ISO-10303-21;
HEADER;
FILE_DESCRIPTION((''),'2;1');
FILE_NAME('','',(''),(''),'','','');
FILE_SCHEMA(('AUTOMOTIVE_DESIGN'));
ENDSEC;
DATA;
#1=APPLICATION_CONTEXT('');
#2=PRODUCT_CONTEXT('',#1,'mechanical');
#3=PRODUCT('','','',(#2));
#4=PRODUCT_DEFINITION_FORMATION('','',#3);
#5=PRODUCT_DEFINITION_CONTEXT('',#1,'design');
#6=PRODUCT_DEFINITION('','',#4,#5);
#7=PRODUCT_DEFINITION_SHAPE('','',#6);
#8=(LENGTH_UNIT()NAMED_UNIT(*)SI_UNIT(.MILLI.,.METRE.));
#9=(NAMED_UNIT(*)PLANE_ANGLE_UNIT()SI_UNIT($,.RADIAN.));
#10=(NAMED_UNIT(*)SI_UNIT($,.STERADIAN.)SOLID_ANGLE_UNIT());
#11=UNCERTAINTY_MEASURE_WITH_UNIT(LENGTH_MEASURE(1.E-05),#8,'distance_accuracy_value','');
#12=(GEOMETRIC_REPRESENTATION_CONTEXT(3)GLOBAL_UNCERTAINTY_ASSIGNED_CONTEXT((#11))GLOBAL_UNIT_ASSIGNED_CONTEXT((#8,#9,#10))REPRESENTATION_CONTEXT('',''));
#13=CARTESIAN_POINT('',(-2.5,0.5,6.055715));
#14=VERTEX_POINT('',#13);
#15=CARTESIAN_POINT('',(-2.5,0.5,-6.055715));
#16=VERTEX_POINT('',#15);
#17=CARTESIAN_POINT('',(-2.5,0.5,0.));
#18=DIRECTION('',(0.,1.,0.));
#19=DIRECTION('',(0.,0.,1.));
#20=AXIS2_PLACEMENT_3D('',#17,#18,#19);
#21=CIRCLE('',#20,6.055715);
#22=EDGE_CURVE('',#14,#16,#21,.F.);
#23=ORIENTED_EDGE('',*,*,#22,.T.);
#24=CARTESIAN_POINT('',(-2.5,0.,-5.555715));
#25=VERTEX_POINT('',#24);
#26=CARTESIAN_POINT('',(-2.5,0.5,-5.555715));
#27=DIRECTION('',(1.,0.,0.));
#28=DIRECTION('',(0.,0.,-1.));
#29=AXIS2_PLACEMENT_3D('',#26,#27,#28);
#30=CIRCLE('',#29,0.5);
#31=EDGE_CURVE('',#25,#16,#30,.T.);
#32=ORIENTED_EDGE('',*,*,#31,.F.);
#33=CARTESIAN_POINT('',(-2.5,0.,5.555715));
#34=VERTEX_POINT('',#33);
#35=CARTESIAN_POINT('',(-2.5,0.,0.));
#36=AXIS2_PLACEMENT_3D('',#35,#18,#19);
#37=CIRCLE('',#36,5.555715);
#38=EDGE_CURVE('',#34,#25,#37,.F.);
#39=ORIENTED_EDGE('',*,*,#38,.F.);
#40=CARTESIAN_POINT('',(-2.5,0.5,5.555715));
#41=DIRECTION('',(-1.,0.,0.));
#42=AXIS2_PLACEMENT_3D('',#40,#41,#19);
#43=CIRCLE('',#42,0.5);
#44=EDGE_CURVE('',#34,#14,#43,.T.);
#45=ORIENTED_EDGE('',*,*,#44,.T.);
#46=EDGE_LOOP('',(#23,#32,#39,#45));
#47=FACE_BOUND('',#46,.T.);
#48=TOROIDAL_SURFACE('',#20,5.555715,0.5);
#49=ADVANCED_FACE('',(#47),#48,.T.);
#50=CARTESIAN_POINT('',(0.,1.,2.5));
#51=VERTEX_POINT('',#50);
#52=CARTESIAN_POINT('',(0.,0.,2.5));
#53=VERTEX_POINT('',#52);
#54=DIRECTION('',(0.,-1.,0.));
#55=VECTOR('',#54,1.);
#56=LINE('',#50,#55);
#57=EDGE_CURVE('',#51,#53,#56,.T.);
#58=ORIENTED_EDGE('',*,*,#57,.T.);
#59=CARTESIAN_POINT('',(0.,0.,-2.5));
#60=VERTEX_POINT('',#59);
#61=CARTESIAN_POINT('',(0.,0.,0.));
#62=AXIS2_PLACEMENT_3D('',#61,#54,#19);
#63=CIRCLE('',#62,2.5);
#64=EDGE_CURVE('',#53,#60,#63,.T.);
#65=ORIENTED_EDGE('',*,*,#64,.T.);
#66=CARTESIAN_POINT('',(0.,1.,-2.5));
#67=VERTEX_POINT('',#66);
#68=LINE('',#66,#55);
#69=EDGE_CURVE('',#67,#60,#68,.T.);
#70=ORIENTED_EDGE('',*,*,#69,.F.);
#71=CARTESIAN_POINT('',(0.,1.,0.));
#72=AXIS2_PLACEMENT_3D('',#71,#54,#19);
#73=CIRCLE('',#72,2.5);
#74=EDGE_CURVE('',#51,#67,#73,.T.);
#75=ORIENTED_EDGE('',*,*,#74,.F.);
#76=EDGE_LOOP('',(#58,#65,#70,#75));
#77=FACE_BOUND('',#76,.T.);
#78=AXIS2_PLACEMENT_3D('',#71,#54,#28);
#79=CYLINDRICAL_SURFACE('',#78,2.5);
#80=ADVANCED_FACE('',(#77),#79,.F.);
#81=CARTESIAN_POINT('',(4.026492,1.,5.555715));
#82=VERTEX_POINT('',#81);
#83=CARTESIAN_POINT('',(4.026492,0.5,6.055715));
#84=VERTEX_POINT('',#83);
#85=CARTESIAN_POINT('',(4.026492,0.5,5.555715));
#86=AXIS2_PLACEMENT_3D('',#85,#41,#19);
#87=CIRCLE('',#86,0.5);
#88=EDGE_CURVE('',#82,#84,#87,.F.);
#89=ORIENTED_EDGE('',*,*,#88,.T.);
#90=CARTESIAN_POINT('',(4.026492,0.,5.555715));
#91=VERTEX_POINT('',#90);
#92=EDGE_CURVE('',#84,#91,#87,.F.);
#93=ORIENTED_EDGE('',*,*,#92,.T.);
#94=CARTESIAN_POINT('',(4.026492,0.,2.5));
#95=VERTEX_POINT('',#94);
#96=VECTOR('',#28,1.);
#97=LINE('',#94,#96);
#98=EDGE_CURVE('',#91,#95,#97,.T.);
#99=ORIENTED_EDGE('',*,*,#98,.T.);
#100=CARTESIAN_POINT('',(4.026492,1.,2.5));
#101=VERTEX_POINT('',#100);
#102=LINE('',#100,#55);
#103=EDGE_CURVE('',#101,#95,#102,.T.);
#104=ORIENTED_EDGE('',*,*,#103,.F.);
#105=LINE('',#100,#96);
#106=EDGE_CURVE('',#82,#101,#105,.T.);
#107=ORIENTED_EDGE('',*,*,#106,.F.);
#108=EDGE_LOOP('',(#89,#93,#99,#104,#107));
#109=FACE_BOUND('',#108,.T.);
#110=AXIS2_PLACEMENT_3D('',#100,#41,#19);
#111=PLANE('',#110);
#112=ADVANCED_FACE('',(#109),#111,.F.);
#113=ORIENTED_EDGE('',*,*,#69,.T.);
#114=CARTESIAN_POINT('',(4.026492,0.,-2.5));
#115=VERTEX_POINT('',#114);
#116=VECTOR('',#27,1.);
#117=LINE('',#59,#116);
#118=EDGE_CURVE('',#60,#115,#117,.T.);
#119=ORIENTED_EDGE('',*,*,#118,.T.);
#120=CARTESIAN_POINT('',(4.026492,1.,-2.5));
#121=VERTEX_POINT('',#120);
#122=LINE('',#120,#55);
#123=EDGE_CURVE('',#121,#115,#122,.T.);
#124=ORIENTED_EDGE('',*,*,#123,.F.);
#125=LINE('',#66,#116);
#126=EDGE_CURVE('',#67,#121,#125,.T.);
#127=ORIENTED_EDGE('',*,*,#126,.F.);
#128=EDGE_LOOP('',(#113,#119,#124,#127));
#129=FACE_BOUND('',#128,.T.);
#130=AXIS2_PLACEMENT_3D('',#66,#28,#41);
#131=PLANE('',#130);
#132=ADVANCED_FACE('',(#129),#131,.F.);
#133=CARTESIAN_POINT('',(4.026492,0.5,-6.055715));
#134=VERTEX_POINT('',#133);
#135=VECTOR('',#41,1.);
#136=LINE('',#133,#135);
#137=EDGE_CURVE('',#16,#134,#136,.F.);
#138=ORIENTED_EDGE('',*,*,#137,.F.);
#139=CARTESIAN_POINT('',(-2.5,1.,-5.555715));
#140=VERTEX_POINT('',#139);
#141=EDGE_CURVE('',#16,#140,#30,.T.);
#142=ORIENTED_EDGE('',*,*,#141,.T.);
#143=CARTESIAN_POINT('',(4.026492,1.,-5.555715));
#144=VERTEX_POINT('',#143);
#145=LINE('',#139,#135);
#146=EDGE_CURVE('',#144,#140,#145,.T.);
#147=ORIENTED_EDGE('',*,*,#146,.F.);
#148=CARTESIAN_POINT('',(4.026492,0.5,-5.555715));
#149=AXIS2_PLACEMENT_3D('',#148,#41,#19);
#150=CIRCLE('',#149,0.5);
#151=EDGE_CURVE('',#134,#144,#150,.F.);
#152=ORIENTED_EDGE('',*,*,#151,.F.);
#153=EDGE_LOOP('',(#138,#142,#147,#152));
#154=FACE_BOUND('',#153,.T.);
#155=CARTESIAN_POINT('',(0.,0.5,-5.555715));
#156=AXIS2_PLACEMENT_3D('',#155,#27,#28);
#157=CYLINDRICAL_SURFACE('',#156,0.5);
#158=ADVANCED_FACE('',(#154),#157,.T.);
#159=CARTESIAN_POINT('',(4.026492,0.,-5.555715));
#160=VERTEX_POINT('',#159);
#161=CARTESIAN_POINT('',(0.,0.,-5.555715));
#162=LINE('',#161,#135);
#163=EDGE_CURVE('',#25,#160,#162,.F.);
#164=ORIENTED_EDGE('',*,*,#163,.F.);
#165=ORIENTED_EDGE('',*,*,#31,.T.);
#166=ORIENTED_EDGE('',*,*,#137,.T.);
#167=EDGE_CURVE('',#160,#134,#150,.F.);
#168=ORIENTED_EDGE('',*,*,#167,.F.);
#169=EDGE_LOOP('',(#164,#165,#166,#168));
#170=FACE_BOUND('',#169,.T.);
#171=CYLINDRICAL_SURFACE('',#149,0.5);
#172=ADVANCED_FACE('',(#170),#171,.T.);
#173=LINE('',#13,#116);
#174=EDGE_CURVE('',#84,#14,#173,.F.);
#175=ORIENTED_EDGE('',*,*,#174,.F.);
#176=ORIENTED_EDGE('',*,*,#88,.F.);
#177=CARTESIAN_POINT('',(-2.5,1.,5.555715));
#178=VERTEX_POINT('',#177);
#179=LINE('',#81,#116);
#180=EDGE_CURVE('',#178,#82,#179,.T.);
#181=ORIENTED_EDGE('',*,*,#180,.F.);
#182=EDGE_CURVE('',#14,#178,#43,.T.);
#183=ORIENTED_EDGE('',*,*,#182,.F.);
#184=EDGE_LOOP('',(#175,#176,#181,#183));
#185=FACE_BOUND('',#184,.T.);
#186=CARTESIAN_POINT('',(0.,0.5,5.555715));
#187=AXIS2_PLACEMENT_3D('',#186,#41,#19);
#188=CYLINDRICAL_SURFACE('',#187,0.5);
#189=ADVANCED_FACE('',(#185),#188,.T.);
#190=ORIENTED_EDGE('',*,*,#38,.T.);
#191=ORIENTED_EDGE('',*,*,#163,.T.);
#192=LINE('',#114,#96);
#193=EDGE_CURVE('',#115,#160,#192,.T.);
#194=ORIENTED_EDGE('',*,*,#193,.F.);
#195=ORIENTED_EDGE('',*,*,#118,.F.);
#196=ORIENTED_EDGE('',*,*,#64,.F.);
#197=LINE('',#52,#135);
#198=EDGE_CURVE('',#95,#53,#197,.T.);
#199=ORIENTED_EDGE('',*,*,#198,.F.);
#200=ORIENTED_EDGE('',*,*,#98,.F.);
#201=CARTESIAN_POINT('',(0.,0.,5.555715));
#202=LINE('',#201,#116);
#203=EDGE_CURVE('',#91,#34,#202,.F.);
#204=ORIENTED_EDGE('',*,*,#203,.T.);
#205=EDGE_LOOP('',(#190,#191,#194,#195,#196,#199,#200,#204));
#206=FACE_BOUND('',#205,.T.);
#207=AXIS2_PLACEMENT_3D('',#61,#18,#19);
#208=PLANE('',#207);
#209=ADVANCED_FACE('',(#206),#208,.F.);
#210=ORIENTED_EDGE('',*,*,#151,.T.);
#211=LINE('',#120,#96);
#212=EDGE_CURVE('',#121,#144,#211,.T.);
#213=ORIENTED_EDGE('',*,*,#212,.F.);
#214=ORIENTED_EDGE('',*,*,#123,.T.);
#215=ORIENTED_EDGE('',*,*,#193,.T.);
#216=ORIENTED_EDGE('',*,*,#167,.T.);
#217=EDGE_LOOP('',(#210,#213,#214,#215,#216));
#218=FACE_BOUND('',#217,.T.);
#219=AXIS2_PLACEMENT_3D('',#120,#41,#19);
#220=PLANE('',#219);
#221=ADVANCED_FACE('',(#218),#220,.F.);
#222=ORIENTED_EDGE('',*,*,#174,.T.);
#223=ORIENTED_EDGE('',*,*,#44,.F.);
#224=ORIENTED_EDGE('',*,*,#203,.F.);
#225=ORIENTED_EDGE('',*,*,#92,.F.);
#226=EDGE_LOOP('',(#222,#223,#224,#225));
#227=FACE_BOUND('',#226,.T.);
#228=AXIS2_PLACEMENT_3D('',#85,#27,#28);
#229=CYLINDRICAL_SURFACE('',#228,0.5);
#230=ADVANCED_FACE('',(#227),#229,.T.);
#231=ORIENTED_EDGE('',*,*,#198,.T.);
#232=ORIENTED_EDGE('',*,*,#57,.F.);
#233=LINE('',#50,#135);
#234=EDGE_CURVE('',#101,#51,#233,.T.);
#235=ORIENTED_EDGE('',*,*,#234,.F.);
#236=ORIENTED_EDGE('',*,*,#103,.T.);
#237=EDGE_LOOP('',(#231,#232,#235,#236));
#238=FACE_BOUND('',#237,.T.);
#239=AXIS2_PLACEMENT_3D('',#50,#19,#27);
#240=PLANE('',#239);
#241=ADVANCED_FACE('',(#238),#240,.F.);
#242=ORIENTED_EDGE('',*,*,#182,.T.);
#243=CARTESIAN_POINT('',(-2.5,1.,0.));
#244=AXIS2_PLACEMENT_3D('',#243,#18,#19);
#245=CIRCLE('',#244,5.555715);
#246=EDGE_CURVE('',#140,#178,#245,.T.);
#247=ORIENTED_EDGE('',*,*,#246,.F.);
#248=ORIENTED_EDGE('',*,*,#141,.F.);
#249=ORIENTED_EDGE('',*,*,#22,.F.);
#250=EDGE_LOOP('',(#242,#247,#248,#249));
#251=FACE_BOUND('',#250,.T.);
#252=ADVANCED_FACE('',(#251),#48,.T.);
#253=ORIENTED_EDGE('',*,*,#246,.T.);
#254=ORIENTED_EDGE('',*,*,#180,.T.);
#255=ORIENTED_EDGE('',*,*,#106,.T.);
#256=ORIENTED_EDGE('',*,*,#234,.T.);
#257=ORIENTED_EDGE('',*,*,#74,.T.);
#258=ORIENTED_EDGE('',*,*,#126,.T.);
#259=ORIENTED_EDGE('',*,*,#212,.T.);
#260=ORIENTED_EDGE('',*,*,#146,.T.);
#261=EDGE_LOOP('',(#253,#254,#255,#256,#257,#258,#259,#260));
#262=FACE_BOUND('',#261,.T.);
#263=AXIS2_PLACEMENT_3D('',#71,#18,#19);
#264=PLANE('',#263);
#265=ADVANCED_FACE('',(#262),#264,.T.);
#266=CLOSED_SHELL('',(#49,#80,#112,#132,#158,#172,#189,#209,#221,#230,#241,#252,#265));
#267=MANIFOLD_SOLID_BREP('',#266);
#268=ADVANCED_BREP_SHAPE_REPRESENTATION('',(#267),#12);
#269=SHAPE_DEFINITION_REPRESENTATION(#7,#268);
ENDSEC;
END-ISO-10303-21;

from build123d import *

# Parameters (mm, degrees)
BOSS_EXTRUDE1_DEPTH = 1
FILLET1_R           = 0.5


with BuildPart() as part:
    # Sketch1 → Boss-Extrude1 (new body)
    with BuildSketch(Plane(origin=(0, 0, 0), x_dir=(1, 0, 0), z_dir=(0, 1, 0))):
        with BuildLine():
            Line((0, 2.5), (4.026491886, 2.5))
            Line((4.026491886, 2.5), (4.026491886, 6.055714934))
            Line((4.026491886, 6.055714934), (-2.5, 6.055714934))
            ThreePointArc((-2.5, 6.055714934), (-8.555714934, 0), (-2.5, -6.055714934))
            Line((-2.5, -6.055714934), (4.026491886, -6.055714934))
            Line((4.026491886, -6.055714934), (4.026491886, -2.5))
            Line((4.026491886, -2.5), (0, -2.5))
            ThreePointArc((0, -2.5), (-2.5, 0), (0, 2.5))
        make_face()
    extrude(amount=BOSS_EXTRUDE1_DEPTH)

    # Fillet1
    fillet1_edges = [part.edges().sort_by_distance(p)[0] for p in [
        (0.763245943, 0, -6.055714934),
        (0.763245943, 0, 6.055714934),
        (0.763245943, 1, -6.055714934),
        (0.763245943, 1, 6.055714934),
        (-8.555714934, 0, 0),
        (-8.555714934, 1, 0),
    ]]
    fillet(fillet1_edges, radius=FILLET1_R - 0.0001)  # a hair under: the kernel refuses the full size


solid = part.part
